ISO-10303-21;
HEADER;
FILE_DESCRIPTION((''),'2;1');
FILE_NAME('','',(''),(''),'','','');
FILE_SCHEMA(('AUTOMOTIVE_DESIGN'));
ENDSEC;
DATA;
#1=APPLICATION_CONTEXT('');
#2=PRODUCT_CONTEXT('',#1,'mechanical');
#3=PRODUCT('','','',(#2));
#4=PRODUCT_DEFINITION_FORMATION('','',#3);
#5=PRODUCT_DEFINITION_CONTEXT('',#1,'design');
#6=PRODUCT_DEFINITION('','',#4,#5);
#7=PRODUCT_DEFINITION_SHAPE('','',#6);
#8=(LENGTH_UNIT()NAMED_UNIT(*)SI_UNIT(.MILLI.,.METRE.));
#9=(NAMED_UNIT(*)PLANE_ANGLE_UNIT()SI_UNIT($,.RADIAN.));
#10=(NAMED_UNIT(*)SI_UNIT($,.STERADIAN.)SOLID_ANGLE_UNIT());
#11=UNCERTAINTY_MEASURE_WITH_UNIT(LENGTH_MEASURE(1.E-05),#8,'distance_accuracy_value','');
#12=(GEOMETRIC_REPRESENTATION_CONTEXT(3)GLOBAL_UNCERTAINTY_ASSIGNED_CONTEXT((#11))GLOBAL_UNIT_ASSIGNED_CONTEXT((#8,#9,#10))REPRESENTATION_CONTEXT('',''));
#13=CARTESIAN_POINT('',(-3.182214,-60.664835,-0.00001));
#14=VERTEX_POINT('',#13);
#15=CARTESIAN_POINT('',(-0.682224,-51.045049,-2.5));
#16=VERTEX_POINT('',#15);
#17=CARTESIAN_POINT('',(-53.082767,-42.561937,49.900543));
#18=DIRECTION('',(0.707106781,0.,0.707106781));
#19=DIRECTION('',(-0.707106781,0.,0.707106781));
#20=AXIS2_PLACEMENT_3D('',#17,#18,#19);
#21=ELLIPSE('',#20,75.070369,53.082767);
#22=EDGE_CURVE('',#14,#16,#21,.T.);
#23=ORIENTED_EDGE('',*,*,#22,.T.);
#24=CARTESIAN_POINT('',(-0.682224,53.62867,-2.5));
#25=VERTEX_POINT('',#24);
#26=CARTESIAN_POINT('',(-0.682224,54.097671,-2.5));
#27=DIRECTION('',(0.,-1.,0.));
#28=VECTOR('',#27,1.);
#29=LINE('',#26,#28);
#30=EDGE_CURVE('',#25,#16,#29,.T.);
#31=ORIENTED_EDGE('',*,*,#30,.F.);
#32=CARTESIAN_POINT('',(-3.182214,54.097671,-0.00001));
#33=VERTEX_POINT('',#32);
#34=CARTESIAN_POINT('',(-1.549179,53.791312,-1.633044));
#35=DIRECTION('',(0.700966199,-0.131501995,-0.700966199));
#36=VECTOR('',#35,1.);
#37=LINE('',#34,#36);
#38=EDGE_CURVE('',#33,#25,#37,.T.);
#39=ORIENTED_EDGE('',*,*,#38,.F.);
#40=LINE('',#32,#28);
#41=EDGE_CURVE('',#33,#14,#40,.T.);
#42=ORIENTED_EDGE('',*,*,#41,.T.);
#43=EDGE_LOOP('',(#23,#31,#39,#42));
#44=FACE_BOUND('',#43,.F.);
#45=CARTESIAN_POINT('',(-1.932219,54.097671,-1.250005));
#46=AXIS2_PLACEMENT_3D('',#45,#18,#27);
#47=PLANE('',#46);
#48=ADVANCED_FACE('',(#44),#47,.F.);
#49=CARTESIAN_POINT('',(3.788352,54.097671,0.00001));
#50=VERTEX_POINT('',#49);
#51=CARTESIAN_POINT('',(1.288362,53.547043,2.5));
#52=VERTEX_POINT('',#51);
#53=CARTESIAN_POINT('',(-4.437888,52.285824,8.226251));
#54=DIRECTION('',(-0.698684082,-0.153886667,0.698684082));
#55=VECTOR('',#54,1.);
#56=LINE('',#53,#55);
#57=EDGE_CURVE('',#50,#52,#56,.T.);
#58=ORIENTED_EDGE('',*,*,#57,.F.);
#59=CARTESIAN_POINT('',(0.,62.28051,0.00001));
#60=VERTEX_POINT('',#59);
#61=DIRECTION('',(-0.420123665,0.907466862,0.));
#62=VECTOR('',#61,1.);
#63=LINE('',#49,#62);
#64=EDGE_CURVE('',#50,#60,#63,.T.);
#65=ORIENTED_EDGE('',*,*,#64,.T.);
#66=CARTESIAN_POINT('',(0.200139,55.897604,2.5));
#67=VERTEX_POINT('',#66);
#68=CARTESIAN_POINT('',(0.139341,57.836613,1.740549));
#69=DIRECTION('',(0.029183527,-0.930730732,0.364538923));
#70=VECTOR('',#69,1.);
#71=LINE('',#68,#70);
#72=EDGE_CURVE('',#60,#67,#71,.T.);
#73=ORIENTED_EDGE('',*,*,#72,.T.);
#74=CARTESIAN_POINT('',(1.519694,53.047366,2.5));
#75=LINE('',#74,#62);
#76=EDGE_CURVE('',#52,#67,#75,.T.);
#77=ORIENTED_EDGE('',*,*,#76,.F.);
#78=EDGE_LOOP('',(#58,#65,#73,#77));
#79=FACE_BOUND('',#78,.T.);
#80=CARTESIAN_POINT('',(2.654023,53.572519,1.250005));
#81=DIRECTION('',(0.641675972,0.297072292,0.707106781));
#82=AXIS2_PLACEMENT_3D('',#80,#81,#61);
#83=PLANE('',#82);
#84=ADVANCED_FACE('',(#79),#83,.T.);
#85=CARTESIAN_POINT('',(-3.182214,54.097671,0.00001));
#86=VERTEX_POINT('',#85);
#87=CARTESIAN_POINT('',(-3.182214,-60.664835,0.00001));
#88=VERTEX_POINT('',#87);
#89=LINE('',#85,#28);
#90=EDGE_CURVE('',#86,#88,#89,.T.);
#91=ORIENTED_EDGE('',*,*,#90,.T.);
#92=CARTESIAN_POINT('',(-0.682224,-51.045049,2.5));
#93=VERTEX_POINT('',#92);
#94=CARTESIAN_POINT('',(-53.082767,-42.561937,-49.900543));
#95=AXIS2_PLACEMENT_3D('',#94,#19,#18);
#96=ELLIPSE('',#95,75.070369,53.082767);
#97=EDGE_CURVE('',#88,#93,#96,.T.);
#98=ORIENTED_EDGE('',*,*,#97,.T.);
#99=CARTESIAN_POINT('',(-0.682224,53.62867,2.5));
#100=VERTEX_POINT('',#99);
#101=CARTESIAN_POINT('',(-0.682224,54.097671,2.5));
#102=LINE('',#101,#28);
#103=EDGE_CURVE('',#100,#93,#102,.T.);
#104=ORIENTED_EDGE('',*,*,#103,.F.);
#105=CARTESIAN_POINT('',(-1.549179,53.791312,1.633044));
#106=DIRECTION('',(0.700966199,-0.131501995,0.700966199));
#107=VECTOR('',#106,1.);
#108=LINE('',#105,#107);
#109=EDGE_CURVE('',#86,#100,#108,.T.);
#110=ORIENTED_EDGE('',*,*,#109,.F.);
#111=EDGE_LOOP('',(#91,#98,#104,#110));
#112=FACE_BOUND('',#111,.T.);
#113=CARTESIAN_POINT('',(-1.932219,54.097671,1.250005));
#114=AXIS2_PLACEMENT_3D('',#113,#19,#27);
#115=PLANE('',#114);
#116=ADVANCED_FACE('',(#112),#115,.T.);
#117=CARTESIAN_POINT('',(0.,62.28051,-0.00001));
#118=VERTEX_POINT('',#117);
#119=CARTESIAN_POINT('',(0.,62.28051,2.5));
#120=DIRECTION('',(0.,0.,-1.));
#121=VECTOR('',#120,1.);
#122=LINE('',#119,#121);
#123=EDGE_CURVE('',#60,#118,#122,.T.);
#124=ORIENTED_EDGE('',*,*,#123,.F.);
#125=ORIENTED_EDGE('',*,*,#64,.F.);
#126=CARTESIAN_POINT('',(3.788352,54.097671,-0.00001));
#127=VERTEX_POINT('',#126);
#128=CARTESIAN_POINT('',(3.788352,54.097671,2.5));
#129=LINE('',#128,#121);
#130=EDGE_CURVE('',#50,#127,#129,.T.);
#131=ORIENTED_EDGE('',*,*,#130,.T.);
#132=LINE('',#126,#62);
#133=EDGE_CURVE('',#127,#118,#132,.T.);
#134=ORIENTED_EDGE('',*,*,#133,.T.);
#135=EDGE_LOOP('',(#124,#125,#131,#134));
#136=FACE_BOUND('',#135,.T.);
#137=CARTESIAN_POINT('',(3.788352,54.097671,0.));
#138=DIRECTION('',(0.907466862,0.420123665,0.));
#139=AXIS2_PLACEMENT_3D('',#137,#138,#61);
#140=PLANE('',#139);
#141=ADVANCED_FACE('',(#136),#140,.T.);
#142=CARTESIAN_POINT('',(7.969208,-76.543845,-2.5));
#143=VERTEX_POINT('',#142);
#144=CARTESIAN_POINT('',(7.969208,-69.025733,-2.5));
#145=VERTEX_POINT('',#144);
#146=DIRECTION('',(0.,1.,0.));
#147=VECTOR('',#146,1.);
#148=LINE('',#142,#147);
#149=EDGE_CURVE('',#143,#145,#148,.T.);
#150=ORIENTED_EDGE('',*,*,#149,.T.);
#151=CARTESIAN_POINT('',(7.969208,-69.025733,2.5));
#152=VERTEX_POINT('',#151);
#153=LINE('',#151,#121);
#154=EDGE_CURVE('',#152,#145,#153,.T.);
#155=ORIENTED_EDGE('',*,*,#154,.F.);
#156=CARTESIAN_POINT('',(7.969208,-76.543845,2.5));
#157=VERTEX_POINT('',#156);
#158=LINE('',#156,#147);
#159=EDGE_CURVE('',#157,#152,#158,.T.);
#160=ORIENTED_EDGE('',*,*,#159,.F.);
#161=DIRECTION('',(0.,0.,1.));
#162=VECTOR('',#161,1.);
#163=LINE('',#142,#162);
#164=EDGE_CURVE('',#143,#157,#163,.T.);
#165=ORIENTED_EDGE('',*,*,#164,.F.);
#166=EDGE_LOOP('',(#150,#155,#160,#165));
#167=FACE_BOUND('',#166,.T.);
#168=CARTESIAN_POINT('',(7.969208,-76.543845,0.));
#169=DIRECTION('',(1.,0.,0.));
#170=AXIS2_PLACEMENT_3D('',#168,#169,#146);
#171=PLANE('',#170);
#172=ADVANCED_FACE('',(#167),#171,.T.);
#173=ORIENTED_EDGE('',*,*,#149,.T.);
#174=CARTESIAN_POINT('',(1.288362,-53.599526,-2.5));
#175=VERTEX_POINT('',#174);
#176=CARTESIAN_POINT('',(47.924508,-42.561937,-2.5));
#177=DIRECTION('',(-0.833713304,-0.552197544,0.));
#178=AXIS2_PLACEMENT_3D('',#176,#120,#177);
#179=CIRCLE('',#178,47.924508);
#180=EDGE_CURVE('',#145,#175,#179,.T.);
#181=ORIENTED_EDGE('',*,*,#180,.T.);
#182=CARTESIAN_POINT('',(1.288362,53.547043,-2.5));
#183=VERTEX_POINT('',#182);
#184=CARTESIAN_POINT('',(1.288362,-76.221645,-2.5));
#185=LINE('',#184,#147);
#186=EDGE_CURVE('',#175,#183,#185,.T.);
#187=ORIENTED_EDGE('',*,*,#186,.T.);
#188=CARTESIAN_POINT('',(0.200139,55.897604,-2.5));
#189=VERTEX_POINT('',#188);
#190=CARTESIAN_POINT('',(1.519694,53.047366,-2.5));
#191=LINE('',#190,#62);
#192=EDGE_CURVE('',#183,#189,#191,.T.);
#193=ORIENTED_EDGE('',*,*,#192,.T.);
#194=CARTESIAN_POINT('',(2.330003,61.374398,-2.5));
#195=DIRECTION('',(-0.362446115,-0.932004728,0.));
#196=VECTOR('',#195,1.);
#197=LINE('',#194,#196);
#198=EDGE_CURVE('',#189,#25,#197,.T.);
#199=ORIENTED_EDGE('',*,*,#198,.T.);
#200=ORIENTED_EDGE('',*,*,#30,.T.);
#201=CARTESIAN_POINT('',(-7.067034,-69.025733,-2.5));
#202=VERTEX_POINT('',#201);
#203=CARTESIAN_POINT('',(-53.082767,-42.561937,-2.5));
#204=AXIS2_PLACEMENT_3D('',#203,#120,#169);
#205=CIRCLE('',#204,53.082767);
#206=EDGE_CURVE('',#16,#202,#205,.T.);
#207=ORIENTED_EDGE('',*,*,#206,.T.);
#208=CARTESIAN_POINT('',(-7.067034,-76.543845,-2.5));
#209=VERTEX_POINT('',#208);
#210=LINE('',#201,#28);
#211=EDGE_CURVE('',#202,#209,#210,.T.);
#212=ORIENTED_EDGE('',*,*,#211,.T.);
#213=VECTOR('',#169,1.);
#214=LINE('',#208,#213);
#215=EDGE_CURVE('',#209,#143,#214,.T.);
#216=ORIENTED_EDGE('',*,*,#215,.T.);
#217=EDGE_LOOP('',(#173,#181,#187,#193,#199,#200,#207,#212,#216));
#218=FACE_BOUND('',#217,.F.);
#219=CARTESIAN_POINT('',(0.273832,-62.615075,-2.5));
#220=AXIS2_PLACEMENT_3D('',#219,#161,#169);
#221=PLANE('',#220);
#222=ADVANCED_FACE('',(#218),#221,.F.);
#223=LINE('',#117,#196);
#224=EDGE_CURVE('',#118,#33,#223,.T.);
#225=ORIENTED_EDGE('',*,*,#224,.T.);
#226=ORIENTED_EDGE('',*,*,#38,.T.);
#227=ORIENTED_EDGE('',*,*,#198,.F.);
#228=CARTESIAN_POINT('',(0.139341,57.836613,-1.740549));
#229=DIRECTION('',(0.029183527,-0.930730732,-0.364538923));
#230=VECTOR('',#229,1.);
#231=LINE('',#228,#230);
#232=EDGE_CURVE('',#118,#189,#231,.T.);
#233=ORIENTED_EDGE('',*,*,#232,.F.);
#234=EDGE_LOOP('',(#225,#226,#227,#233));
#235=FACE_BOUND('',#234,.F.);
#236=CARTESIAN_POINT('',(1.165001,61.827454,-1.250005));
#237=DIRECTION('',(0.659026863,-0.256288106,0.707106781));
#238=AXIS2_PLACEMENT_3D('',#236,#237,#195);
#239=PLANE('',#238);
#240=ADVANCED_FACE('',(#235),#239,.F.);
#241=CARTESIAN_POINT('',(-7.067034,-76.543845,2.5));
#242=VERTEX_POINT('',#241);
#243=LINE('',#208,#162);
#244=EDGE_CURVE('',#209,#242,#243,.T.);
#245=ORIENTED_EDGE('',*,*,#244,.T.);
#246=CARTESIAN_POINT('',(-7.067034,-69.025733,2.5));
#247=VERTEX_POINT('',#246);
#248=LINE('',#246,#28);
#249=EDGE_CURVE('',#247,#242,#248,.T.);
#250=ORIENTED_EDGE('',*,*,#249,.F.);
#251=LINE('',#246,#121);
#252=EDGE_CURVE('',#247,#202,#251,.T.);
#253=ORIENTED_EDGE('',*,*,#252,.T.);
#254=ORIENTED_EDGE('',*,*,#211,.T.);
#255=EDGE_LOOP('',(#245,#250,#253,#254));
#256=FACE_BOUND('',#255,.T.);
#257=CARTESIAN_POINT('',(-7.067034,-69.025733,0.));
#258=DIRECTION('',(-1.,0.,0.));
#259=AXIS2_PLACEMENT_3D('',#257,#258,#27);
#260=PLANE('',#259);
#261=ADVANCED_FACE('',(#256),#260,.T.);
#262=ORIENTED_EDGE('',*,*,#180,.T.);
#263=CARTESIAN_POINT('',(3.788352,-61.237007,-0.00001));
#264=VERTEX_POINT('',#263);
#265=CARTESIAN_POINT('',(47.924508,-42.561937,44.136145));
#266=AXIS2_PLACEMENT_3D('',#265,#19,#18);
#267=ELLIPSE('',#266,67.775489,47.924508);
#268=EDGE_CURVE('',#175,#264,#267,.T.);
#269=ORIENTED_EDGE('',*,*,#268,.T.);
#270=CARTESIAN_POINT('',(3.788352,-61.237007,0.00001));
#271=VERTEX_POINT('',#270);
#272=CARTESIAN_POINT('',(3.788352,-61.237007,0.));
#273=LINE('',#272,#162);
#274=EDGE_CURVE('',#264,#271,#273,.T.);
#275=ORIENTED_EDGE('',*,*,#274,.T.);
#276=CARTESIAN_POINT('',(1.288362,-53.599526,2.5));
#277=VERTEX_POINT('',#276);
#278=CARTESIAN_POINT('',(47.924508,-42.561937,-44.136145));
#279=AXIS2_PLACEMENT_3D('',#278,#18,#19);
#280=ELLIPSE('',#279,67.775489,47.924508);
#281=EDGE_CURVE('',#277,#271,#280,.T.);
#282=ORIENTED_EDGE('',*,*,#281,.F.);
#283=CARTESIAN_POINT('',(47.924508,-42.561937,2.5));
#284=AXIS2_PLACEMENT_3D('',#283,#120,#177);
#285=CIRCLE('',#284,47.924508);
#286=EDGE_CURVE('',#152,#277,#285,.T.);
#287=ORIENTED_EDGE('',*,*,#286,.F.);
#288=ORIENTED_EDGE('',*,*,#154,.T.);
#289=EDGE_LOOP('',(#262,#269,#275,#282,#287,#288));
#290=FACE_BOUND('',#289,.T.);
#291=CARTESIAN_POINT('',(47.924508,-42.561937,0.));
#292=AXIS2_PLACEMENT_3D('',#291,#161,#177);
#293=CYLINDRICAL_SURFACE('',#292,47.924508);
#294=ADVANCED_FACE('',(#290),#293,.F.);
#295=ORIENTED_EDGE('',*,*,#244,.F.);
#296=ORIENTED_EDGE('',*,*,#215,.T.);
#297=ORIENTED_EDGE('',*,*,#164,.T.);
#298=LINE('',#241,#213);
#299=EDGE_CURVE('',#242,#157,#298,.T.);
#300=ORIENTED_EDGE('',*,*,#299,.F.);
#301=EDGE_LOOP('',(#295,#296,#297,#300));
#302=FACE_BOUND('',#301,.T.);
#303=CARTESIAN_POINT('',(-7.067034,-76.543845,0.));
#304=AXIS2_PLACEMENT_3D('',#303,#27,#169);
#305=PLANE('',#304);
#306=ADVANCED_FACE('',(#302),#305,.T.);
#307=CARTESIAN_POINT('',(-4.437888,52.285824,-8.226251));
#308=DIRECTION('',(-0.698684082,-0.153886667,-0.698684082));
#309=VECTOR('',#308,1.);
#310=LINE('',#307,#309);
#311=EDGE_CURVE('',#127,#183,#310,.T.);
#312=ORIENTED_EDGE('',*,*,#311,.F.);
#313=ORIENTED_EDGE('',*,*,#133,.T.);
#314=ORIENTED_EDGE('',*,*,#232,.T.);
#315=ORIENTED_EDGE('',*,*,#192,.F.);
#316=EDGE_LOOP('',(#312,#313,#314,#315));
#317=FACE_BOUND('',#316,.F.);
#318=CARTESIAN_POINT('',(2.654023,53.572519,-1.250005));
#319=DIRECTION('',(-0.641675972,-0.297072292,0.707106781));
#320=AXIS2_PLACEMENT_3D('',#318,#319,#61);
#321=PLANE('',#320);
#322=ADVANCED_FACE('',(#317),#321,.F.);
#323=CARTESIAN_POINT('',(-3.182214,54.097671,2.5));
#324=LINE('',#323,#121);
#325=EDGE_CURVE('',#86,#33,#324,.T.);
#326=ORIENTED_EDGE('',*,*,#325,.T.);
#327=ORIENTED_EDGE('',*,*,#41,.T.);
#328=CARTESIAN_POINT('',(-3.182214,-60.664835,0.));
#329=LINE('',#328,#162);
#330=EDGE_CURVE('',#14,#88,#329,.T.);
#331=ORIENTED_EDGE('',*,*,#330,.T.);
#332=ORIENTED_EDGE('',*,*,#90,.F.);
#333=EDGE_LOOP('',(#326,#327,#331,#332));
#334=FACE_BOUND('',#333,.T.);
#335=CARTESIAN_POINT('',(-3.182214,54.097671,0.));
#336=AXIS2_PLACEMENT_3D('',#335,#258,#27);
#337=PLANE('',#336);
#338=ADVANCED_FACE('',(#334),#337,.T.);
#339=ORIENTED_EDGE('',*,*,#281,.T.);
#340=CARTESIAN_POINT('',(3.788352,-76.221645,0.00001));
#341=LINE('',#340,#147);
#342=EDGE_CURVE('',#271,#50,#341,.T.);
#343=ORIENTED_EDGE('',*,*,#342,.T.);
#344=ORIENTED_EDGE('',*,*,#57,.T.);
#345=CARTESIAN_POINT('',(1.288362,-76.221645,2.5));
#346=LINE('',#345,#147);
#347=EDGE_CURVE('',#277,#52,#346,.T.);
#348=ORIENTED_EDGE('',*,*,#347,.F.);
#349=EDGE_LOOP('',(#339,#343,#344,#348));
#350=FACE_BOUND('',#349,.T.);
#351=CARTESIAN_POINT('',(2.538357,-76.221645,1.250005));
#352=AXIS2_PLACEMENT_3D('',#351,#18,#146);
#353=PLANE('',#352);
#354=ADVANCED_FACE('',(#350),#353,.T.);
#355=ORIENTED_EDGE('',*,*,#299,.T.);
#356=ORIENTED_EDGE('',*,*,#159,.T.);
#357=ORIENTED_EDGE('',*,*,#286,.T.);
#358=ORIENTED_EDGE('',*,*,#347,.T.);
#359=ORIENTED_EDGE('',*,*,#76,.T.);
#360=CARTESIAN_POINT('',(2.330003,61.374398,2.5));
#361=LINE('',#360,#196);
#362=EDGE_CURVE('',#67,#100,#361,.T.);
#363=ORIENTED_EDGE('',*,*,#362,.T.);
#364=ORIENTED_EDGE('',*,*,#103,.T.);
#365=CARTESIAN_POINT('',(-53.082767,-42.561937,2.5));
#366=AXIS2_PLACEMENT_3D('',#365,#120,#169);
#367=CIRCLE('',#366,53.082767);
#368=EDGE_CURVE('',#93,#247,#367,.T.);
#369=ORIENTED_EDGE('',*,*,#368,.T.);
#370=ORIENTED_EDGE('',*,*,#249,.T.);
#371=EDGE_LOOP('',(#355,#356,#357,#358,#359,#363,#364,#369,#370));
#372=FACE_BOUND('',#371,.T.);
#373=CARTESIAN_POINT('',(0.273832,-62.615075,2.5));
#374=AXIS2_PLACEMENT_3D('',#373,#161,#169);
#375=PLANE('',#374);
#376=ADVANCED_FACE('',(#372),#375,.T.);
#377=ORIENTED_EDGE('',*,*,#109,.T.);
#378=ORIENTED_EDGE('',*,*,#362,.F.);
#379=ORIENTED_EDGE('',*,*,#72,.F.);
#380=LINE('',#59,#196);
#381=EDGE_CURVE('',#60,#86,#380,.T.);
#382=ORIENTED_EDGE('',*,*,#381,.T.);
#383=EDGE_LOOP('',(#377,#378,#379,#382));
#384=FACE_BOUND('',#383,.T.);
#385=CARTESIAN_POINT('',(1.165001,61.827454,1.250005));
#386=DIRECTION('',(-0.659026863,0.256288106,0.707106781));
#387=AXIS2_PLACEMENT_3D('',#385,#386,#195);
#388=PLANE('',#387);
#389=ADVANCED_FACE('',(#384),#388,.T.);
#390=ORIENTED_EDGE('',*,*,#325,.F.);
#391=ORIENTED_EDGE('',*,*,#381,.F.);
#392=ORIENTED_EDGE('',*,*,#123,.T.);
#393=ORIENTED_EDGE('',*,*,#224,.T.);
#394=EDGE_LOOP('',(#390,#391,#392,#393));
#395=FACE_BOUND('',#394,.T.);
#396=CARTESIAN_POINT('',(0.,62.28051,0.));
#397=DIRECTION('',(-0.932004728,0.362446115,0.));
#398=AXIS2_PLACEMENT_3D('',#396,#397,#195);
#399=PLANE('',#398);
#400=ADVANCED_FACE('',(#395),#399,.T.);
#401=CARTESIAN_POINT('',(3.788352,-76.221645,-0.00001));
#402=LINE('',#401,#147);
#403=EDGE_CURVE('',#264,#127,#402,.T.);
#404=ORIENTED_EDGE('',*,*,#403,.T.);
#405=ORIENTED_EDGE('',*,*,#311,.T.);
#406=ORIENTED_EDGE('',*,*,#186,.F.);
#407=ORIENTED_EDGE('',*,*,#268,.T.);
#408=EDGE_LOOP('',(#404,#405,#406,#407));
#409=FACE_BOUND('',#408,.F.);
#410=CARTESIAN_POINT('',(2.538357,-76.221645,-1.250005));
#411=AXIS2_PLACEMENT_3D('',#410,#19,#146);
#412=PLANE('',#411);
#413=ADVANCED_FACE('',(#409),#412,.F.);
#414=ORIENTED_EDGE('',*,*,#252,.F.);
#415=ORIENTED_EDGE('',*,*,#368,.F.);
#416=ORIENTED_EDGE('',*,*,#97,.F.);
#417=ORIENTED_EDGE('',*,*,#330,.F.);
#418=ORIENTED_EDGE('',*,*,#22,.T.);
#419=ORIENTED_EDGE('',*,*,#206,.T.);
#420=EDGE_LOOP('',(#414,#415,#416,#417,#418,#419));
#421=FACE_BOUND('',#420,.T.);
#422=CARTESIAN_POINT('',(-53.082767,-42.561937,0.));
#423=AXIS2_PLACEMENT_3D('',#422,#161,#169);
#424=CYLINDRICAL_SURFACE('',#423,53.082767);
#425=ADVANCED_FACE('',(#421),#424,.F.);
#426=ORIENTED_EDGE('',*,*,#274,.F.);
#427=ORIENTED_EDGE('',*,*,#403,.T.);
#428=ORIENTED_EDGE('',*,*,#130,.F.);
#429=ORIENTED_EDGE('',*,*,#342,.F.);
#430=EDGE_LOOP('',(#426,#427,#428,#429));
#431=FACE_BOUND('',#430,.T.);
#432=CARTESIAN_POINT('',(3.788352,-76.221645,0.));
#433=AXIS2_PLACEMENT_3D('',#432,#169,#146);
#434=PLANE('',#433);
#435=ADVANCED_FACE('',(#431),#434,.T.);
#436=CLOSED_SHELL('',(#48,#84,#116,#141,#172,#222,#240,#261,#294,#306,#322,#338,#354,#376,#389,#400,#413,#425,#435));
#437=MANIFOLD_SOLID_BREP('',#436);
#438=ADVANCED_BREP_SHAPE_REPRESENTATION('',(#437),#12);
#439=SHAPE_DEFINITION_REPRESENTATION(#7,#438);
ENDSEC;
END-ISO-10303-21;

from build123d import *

# Parameters (mm, degrees)
F1_DEPTH = 2.5
F2_SIZE  = 2.49999
F4_DEPTH = 2.5


# Not quite as in the source:
# - a fillet or chamfer is up to 0.001 mm smaller than in the source, because OpenCascade refuses the exact size


with BuildPart() as f1:
    # F0 (on Top) → F1 (new body, symmetric)
    with BuildSketch(Plane.XY):
        Polygon((-3.1822135206, 54.0976710618), (-3.1822135206, -76.2216448784), (3.7883522455, -76.2216448784), (3.7883522455, 54.0976710618), (0, 62.2805096209), align=None)
    extrude(amount=F1_DEPTH, both=True)

    # F2 (size 2.5 in the source; OpenCascade refuses exactly that, so slightly less here)
    f2_edges = [f1.edges().sort_by_distance(p)[0] for p in [
        (-1.591107, 58.18909, -2.5),
        (-3.182214, -11.061987, -2.5),
        (0.303069, -76.221645, -2.5),
        (3.788352, -11.061987, -2.5),
        (1.894176, 58.18909, -2.5),
        (-1.591107, 58.18909, 2.5),
        (-3.182214, -11.061987, 2.5),
        (0.303069, -76.221645, 2.5),
        (3.788352, -11.061987, 2.5),
        (1.894176, 58.18909, 2.5),
    ]]
    chamfer(f2_edges, length=F2_SIZE)

    # F3 (on Top) → F4 (join, symmetric)
    with BuildSketch(Plane.XY):
        with BuildLine():
            Line((-7.067034021, -69.0257325768), (-7.067034021, -76.5438452363))
            Line((-7.067034021, -76.5438452363), (7.9692080617, -76.5438452363))
            Line((7.9692080617, -76.5438452363), (7.9692080617, -69.0257325768))
            ThreePointArc((7.9692080617, -69.0257325768), (2.0355302464, -56.380771616), (0, -42.5619371235))
            ThreePointArc((0, -42.5619371235), (-1.7971813817, -56.2575152388), (-7.067034021, -69.0257325768))
        make_face()
    extrude(amount=F4_DEPTH, both=True)


solid = f1.part
